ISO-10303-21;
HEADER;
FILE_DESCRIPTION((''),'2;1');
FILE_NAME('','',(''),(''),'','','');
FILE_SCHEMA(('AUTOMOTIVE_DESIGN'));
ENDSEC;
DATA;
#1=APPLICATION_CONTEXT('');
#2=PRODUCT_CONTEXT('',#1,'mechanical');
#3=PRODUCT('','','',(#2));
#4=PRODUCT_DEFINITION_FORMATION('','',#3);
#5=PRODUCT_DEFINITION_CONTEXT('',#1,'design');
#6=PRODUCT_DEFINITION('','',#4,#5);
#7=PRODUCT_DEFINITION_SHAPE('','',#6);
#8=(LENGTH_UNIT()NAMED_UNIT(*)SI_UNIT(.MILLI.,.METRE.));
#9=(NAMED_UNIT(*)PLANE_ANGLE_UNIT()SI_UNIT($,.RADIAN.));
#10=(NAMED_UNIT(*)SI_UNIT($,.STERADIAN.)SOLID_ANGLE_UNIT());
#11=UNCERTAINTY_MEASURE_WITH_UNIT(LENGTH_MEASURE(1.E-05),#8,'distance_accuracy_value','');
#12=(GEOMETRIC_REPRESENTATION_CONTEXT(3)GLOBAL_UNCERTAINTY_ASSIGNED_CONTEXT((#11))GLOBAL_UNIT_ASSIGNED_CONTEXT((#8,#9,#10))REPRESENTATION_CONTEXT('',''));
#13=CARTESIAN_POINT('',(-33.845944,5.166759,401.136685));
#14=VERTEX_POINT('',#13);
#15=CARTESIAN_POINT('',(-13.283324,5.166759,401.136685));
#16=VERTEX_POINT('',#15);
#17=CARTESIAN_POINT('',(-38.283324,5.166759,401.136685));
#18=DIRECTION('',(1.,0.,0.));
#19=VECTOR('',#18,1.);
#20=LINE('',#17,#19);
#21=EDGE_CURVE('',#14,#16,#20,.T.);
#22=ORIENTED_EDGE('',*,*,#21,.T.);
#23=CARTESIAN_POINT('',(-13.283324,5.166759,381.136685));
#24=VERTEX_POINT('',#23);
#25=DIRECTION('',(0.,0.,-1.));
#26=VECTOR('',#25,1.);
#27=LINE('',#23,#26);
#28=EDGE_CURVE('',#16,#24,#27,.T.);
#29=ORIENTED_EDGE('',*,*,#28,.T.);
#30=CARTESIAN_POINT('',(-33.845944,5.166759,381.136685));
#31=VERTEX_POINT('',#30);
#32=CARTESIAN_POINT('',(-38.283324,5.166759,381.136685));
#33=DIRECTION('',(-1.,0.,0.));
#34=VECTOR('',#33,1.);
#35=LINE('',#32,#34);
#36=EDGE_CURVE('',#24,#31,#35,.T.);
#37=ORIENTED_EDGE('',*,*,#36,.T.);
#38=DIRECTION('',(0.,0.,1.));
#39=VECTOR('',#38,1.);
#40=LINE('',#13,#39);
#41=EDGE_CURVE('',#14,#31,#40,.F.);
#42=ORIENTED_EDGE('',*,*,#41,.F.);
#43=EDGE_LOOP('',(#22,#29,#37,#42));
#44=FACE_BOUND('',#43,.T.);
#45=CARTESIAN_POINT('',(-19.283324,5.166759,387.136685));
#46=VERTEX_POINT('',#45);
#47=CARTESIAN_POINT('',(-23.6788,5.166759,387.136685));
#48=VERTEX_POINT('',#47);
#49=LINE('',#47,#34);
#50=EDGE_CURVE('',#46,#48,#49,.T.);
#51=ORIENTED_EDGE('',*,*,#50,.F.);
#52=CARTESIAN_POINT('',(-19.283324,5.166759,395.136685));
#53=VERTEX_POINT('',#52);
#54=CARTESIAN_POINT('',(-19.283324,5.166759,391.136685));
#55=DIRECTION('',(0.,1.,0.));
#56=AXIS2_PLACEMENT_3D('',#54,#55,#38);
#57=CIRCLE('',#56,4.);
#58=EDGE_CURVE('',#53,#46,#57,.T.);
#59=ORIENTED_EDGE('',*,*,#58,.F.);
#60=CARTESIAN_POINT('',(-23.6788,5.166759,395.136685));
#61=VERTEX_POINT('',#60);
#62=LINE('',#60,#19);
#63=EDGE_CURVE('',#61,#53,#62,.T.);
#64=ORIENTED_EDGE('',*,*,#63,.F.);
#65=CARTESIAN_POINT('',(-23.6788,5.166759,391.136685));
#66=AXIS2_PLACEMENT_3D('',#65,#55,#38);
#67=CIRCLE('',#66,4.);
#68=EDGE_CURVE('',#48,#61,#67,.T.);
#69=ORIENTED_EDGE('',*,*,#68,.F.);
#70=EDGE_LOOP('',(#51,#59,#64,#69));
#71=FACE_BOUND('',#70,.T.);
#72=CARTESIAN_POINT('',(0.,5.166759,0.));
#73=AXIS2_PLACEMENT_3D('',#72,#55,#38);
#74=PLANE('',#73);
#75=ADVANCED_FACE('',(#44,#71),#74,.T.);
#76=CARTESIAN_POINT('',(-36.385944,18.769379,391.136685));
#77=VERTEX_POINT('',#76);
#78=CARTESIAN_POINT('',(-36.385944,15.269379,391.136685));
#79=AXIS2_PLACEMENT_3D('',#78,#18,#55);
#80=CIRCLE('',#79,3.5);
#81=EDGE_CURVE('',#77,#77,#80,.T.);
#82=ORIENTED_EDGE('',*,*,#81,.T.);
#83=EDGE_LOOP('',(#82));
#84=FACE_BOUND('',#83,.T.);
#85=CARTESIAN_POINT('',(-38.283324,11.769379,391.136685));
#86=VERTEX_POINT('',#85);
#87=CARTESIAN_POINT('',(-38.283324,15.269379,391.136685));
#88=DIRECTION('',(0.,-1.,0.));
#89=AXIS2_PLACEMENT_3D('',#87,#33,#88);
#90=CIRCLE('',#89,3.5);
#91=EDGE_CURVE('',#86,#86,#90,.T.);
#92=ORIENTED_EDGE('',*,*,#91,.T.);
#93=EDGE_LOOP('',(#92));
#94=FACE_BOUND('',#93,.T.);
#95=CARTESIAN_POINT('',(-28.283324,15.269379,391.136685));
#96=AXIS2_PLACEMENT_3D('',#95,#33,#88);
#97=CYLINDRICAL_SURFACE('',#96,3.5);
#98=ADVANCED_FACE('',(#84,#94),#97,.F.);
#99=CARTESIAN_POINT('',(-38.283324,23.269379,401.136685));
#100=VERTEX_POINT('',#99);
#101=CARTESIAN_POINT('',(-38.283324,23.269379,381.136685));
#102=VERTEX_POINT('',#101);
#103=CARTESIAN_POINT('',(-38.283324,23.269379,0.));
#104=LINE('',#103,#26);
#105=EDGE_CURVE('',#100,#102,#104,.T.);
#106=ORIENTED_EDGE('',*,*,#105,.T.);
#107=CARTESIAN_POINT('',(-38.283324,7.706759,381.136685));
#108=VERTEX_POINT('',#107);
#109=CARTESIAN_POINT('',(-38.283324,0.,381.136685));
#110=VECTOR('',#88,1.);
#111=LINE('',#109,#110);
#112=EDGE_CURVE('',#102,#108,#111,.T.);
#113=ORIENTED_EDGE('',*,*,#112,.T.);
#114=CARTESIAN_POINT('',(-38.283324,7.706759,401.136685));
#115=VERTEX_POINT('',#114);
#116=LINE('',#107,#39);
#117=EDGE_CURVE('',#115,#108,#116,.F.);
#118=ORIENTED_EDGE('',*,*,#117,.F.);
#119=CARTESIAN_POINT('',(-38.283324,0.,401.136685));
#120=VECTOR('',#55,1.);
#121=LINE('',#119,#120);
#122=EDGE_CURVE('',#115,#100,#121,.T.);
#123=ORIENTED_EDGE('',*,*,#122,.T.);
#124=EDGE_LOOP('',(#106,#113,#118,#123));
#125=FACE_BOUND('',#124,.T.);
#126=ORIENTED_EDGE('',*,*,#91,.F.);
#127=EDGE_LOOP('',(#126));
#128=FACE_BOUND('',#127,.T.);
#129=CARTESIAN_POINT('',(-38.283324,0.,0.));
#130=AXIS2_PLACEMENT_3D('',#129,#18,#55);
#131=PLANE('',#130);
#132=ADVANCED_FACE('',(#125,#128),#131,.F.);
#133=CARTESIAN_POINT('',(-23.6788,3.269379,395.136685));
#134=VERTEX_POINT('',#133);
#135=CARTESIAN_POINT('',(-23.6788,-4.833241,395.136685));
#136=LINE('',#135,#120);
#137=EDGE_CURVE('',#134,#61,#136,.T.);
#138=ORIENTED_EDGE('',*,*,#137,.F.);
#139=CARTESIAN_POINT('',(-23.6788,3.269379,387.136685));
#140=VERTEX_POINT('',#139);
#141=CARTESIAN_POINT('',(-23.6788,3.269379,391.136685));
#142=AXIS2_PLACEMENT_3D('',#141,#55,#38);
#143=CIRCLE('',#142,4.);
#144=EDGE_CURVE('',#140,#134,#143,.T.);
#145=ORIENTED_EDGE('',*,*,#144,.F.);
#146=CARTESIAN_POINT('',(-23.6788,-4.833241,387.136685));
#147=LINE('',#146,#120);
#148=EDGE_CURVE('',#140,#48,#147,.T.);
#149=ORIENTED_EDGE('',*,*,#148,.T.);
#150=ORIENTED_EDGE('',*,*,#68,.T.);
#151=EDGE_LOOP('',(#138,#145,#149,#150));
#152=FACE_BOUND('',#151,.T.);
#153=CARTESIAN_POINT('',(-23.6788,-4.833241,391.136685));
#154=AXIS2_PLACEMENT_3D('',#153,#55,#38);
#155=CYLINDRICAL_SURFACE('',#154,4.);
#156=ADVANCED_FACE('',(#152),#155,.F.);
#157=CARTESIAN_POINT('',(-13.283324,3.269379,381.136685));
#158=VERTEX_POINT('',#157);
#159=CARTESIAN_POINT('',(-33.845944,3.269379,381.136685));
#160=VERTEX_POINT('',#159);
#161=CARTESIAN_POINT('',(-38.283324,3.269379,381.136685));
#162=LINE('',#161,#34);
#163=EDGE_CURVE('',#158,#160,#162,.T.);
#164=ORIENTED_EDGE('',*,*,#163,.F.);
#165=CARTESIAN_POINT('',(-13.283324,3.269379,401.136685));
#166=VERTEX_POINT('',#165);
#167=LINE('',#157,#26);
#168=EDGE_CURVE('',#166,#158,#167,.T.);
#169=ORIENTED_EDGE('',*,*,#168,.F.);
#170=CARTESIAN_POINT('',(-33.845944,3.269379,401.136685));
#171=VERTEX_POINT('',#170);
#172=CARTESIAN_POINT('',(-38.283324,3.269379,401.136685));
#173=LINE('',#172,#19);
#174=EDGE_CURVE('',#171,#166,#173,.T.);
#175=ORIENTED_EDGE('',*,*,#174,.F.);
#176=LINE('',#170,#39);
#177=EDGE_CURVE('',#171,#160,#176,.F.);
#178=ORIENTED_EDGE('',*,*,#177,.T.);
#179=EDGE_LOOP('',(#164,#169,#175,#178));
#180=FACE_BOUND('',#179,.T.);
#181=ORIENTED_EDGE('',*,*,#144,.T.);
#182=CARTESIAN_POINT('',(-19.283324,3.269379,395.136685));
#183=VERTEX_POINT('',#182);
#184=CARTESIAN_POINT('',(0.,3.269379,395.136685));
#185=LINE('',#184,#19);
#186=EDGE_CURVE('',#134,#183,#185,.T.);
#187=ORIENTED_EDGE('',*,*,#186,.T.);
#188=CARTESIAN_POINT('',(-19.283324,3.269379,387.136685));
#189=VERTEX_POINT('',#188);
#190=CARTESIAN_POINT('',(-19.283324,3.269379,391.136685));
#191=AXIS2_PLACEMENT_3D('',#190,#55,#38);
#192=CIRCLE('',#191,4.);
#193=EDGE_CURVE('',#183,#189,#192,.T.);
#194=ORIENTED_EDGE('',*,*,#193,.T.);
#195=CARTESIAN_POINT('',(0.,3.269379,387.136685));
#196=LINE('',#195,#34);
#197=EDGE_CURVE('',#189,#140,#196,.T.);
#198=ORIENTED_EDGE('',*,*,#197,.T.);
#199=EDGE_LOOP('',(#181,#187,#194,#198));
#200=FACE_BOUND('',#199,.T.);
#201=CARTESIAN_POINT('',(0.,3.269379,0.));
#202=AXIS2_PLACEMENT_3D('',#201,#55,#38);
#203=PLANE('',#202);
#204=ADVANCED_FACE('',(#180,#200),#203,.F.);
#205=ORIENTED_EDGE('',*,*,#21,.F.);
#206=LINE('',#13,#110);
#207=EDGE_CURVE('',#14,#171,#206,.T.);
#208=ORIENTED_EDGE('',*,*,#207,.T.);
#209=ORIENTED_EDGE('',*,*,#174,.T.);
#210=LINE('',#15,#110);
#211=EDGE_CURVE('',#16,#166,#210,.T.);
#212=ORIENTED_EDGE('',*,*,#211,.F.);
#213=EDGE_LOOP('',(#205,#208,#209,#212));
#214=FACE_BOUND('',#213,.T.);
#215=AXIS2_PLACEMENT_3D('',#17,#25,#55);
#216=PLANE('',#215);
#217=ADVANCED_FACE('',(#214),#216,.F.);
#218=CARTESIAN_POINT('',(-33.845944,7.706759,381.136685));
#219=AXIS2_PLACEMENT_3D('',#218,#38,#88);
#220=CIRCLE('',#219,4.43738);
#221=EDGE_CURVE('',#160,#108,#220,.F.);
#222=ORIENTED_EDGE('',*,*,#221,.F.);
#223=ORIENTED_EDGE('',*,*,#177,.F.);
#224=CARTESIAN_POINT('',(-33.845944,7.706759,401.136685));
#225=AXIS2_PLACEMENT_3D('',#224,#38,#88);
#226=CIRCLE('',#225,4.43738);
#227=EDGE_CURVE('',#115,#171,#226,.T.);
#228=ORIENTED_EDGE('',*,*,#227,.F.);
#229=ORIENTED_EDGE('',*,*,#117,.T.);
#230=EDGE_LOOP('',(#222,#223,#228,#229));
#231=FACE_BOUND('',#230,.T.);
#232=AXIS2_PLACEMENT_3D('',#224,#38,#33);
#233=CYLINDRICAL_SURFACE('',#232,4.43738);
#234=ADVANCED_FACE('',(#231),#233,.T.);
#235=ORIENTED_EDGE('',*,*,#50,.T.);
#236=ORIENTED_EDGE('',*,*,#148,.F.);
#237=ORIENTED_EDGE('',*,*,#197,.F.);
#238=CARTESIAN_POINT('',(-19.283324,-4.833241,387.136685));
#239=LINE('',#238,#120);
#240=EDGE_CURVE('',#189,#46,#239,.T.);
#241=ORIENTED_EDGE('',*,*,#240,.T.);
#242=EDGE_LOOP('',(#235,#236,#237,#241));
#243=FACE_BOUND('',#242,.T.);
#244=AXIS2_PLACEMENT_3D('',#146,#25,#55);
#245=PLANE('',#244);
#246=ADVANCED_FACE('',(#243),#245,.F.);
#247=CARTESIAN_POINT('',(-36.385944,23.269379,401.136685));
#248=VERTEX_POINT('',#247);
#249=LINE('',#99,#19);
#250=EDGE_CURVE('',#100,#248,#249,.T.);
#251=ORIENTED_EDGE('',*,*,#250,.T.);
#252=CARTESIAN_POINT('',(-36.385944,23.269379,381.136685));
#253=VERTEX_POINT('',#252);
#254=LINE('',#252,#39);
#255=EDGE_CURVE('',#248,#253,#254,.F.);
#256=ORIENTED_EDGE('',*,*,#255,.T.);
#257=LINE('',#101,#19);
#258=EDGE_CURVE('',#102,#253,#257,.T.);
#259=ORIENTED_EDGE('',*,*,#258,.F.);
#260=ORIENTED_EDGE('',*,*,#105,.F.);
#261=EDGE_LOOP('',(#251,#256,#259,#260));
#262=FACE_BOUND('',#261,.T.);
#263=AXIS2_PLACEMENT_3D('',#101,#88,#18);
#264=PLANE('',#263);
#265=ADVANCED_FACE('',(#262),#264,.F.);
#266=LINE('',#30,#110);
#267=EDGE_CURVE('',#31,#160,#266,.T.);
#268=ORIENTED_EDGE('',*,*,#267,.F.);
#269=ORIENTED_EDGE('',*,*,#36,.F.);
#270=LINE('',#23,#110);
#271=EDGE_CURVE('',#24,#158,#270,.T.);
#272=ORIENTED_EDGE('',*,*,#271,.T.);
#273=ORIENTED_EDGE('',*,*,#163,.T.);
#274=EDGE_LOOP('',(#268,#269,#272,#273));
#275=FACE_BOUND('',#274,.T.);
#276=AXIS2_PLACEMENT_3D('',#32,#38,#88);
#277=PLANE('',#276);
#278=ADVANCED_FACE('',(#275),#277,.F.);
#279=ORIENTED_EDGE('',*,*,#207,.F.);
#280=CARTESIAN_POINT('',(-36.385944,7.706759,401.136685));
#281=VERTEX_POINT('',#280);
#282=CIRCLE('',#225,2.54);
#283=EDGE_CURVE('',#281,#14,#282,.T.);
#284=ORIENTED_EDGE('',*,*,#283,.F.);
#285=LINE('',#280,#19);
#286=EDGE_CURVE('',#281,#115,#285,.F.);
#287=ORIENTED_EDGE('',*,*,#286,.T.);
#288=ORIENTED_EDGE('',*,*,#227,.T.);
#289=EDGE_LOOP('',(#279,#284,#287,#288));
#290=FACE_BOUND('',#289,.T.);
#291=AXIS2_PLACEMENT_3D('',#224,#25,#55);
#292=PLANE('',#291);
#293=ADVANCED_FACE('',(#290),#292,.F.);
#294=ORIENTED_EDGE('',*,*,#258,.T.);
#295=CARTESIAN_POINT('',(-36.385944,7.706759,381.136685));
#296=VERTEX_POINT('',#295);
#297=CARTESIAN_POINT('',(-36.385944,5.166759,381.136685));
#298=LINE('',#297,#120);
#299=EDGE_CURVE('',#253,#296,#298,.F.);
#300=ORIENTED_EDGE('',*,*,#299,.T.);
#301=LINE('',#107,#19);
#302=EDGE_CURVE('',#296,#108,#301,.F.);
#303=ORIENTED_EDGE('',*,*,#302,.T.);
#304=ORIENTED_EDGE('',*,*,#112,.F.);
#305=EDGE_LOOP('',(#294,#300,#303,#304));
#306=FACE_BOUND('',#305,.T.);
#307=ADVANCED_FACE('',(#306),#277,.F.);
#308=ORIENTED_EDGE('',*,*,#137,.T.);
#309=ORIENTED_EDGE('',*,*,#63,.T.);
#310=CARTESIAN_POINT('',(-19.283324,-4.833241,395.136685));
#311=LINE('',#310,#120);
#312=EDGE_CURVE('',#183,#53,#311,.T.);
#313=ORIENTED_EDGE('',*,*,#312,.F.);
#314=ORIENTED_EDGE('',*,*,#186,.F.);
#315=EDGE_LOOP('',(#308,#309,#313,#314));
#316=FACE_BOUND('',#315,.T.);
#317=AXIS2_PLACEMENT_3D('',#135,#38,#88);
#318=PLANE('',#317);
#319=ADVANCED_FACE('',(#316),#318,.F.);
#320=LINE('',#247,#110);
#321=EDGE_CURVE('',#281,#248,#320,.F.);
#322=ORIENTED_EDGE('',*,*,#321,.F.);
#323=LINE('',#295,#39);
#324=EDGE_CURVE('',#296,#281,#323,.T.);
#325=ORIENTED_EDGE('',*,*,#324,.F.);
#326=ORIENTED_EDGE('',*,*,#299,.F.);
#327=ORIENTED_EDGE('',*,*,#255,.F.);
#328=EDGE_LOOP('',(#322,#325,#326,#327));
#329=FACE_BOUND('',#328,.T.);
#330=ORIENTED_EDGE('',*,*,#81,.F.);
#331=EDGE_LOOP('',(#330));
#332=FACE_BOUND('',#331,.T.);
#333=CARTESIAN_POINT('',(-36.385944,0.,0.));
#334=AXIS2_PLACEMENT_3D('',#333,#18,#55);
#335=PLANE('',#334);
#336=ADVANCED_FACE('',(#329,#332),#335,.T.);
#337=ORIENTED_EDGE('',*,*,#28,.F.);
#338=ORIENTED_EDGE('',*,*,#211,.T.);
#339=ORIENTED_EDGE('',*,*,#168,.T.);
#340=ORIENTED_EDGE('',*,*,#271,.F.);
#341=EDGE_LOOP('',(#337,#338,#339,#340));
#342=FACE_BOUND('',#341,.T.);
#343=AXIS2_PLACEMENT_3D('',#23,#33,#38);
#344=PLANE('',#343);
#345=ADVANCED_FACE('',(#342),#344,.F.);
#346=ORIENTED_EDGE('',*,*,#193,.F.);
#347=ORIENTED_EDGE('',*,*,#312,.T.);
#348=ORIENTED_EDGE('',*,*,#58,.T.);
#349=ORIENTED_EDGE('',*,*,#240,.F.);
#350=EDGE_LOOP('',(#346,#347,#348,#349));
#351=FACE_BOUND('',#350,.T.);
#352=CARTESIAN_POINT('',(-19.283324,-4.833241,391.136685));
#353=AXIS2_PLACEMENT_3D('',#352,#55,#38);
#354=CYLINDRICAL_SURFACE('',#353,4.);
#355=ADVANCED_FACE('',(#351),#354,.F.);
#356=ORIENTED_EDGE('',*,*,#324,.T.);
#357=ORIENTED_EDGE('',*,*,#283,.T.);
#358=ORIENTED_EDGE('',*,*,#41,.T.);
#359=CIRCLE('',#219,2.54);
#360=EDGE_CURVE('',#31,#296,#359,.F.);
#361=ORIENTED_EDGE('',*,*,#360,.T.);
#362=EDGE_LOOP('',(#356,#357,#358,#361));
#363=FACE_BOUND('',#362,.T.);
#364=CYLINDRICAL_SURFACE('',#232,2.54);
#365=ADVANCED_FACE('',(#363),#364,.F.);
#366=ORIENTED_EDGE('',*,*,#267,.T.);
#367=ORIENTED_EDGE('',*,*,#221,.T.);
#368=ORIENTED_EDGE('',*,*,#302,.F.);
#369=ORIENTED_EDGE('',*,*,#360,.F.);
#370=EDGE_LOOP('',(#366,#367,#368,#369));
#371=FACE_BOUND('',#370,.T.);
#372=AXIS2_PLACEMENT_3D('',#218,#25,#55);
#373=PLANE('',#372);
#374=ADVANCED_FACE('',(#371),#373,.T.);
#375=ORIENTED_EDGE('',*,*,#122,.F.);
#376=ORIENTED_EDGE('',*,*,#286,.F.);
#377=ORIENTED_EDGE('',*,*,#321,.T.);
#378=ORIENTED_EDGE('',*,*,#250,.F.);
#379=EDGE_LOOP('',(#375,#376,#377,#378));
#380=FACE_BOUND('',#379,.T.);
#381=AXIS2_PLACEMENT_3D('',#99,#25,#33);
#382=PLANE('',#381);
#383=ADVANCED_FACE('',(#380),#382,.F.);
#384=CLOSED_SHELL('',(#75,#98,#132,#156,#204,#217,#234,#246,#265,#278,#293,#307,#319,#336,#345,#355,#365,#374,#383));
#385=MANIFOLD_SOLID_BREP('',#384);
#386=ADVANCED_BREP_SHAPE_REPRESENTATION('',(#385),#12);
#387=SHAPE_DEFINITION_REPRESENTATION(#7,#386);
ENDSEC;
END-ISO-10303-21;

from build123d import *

# Parameters (mm, degrees)
SKETCH2_W                    = 25
SKETCH2_H                    = 20
BASE_FLANGE1_DEPTH           = 1.89738
EDGE_FLANGE1_STRIP_W         = 12.66952
EDGE_FLANGE1_STRIP_H         = 1.89738
EDGE_FLANGE1_STRIP_CUT_DEPTH = 20
EDGE_FLANGE1_DEPTH           = 20
SKETCH11_R                   = 3.5
CUT_EXTRUDE1_DEPTH           = 10
CUT_EXTRUDE2_DEPTH           = 10


# Sheet-metal steps are written as plain solids
with BuildPart() as part:
    # Sketch2 → Base-Flange1 (new body)
    with BuildSketch(Plane(origin=(0, 3.26937922, 0), x_dir=(1, 0, 0), z_dir=(0, 1, 0))):
        with Locations((-25.783324161, -391.136685208)):
            Rectangle(SKETCH2_W, SKETCH2_H)
    extrude(amount=BASE_FLANGE1_DEPTH)

    # Edge-Flange1 strip (across the edge) → Edge-Flange1 strip cut (cut)
    with BuildSketch(Plane(origin=(-38.283324161, 5.16675922, 381.136685208), x_dir=(1, 0, 0), z_dir=(0, 0, 1))):
        with Locations((-1.89738, -0.94869)):
            Rectangle(EDGE_FLANGE1_STRIP_W, EDGE_FLANGE1_STRIP_H)
    extrude(amount=EDGE_FLANGE1_STRIP_CUT_DEPTH, mode=Mode.SUBTRACT)

    # Edge-Flange1 section (across the edge) → Edge-Flange1 (add)
    with BuildSketch(Plane(origin=(-38.283324161, 5.16675922, 381.136685208), x_dir=(1, 0, 0), z_dir=(0, 0, 1))):
        with BuildLine():
            Line((0, 2.54), (0, 18.10262))
            Line((0, 18.10262), (1.89738, 18.10262))
            Line((1.89738, 18.10262), (1.89738, 2.54))
            ThreePointArc((1.89738, 2.54), (2.641328776, 0.743948776), (4.43738, 0))
            Line((4.43738, 0), (4.43738, -1.89738))
            ThreePointArc((4.43738, -1.89738), (1.299678511, -0.597701489), (0, 2.54))
        make_face()
    extrude(amount=EDGE_FLANGE1_DEPTH)

    # Sketch11 → Cut-Extrude1 (cut)
    with BuildSketch(Plane.ZY.offset(38.283324161)):
        with Locations(Location((391.136685208, 15.26937922, 0), (0, 0, 270))):
            Circle(SKETCH11_R)
    extrude(amount=-CUT_EXTRUDE1_DEPTH, mode=Mode.SUBTRACT)

    # Sketch13 → Cut-Extrude2 (cut)
    with BuildSketch(Plane(origin=(0, 5.16675922, 0), x_dir=(1, 0, 0), z_dir=(0, 1, 0))):
        with BuildLine():
            Line((-23.678800395, -387.136685208), (-19.283324161, -387.136685208))
            ThreePointArc((-19.283324161, -387.136685208), (-15.283324161, -391.136685208), (-19.283324161, -395.136685208))
            Line((-19.283324161, -395.136685208), (-23.678800395, -395.136685208))
            ThreePointArc((-23.678800395, -395.136685208), (-27.678800395, -391.136685208), (-23.678800395, -387.136685208))
        make_face()
    extrude(amount=-CUT_EXTRUDE2_DEPTH, mode=Mode.SUBTRACT)


solid = part.part
